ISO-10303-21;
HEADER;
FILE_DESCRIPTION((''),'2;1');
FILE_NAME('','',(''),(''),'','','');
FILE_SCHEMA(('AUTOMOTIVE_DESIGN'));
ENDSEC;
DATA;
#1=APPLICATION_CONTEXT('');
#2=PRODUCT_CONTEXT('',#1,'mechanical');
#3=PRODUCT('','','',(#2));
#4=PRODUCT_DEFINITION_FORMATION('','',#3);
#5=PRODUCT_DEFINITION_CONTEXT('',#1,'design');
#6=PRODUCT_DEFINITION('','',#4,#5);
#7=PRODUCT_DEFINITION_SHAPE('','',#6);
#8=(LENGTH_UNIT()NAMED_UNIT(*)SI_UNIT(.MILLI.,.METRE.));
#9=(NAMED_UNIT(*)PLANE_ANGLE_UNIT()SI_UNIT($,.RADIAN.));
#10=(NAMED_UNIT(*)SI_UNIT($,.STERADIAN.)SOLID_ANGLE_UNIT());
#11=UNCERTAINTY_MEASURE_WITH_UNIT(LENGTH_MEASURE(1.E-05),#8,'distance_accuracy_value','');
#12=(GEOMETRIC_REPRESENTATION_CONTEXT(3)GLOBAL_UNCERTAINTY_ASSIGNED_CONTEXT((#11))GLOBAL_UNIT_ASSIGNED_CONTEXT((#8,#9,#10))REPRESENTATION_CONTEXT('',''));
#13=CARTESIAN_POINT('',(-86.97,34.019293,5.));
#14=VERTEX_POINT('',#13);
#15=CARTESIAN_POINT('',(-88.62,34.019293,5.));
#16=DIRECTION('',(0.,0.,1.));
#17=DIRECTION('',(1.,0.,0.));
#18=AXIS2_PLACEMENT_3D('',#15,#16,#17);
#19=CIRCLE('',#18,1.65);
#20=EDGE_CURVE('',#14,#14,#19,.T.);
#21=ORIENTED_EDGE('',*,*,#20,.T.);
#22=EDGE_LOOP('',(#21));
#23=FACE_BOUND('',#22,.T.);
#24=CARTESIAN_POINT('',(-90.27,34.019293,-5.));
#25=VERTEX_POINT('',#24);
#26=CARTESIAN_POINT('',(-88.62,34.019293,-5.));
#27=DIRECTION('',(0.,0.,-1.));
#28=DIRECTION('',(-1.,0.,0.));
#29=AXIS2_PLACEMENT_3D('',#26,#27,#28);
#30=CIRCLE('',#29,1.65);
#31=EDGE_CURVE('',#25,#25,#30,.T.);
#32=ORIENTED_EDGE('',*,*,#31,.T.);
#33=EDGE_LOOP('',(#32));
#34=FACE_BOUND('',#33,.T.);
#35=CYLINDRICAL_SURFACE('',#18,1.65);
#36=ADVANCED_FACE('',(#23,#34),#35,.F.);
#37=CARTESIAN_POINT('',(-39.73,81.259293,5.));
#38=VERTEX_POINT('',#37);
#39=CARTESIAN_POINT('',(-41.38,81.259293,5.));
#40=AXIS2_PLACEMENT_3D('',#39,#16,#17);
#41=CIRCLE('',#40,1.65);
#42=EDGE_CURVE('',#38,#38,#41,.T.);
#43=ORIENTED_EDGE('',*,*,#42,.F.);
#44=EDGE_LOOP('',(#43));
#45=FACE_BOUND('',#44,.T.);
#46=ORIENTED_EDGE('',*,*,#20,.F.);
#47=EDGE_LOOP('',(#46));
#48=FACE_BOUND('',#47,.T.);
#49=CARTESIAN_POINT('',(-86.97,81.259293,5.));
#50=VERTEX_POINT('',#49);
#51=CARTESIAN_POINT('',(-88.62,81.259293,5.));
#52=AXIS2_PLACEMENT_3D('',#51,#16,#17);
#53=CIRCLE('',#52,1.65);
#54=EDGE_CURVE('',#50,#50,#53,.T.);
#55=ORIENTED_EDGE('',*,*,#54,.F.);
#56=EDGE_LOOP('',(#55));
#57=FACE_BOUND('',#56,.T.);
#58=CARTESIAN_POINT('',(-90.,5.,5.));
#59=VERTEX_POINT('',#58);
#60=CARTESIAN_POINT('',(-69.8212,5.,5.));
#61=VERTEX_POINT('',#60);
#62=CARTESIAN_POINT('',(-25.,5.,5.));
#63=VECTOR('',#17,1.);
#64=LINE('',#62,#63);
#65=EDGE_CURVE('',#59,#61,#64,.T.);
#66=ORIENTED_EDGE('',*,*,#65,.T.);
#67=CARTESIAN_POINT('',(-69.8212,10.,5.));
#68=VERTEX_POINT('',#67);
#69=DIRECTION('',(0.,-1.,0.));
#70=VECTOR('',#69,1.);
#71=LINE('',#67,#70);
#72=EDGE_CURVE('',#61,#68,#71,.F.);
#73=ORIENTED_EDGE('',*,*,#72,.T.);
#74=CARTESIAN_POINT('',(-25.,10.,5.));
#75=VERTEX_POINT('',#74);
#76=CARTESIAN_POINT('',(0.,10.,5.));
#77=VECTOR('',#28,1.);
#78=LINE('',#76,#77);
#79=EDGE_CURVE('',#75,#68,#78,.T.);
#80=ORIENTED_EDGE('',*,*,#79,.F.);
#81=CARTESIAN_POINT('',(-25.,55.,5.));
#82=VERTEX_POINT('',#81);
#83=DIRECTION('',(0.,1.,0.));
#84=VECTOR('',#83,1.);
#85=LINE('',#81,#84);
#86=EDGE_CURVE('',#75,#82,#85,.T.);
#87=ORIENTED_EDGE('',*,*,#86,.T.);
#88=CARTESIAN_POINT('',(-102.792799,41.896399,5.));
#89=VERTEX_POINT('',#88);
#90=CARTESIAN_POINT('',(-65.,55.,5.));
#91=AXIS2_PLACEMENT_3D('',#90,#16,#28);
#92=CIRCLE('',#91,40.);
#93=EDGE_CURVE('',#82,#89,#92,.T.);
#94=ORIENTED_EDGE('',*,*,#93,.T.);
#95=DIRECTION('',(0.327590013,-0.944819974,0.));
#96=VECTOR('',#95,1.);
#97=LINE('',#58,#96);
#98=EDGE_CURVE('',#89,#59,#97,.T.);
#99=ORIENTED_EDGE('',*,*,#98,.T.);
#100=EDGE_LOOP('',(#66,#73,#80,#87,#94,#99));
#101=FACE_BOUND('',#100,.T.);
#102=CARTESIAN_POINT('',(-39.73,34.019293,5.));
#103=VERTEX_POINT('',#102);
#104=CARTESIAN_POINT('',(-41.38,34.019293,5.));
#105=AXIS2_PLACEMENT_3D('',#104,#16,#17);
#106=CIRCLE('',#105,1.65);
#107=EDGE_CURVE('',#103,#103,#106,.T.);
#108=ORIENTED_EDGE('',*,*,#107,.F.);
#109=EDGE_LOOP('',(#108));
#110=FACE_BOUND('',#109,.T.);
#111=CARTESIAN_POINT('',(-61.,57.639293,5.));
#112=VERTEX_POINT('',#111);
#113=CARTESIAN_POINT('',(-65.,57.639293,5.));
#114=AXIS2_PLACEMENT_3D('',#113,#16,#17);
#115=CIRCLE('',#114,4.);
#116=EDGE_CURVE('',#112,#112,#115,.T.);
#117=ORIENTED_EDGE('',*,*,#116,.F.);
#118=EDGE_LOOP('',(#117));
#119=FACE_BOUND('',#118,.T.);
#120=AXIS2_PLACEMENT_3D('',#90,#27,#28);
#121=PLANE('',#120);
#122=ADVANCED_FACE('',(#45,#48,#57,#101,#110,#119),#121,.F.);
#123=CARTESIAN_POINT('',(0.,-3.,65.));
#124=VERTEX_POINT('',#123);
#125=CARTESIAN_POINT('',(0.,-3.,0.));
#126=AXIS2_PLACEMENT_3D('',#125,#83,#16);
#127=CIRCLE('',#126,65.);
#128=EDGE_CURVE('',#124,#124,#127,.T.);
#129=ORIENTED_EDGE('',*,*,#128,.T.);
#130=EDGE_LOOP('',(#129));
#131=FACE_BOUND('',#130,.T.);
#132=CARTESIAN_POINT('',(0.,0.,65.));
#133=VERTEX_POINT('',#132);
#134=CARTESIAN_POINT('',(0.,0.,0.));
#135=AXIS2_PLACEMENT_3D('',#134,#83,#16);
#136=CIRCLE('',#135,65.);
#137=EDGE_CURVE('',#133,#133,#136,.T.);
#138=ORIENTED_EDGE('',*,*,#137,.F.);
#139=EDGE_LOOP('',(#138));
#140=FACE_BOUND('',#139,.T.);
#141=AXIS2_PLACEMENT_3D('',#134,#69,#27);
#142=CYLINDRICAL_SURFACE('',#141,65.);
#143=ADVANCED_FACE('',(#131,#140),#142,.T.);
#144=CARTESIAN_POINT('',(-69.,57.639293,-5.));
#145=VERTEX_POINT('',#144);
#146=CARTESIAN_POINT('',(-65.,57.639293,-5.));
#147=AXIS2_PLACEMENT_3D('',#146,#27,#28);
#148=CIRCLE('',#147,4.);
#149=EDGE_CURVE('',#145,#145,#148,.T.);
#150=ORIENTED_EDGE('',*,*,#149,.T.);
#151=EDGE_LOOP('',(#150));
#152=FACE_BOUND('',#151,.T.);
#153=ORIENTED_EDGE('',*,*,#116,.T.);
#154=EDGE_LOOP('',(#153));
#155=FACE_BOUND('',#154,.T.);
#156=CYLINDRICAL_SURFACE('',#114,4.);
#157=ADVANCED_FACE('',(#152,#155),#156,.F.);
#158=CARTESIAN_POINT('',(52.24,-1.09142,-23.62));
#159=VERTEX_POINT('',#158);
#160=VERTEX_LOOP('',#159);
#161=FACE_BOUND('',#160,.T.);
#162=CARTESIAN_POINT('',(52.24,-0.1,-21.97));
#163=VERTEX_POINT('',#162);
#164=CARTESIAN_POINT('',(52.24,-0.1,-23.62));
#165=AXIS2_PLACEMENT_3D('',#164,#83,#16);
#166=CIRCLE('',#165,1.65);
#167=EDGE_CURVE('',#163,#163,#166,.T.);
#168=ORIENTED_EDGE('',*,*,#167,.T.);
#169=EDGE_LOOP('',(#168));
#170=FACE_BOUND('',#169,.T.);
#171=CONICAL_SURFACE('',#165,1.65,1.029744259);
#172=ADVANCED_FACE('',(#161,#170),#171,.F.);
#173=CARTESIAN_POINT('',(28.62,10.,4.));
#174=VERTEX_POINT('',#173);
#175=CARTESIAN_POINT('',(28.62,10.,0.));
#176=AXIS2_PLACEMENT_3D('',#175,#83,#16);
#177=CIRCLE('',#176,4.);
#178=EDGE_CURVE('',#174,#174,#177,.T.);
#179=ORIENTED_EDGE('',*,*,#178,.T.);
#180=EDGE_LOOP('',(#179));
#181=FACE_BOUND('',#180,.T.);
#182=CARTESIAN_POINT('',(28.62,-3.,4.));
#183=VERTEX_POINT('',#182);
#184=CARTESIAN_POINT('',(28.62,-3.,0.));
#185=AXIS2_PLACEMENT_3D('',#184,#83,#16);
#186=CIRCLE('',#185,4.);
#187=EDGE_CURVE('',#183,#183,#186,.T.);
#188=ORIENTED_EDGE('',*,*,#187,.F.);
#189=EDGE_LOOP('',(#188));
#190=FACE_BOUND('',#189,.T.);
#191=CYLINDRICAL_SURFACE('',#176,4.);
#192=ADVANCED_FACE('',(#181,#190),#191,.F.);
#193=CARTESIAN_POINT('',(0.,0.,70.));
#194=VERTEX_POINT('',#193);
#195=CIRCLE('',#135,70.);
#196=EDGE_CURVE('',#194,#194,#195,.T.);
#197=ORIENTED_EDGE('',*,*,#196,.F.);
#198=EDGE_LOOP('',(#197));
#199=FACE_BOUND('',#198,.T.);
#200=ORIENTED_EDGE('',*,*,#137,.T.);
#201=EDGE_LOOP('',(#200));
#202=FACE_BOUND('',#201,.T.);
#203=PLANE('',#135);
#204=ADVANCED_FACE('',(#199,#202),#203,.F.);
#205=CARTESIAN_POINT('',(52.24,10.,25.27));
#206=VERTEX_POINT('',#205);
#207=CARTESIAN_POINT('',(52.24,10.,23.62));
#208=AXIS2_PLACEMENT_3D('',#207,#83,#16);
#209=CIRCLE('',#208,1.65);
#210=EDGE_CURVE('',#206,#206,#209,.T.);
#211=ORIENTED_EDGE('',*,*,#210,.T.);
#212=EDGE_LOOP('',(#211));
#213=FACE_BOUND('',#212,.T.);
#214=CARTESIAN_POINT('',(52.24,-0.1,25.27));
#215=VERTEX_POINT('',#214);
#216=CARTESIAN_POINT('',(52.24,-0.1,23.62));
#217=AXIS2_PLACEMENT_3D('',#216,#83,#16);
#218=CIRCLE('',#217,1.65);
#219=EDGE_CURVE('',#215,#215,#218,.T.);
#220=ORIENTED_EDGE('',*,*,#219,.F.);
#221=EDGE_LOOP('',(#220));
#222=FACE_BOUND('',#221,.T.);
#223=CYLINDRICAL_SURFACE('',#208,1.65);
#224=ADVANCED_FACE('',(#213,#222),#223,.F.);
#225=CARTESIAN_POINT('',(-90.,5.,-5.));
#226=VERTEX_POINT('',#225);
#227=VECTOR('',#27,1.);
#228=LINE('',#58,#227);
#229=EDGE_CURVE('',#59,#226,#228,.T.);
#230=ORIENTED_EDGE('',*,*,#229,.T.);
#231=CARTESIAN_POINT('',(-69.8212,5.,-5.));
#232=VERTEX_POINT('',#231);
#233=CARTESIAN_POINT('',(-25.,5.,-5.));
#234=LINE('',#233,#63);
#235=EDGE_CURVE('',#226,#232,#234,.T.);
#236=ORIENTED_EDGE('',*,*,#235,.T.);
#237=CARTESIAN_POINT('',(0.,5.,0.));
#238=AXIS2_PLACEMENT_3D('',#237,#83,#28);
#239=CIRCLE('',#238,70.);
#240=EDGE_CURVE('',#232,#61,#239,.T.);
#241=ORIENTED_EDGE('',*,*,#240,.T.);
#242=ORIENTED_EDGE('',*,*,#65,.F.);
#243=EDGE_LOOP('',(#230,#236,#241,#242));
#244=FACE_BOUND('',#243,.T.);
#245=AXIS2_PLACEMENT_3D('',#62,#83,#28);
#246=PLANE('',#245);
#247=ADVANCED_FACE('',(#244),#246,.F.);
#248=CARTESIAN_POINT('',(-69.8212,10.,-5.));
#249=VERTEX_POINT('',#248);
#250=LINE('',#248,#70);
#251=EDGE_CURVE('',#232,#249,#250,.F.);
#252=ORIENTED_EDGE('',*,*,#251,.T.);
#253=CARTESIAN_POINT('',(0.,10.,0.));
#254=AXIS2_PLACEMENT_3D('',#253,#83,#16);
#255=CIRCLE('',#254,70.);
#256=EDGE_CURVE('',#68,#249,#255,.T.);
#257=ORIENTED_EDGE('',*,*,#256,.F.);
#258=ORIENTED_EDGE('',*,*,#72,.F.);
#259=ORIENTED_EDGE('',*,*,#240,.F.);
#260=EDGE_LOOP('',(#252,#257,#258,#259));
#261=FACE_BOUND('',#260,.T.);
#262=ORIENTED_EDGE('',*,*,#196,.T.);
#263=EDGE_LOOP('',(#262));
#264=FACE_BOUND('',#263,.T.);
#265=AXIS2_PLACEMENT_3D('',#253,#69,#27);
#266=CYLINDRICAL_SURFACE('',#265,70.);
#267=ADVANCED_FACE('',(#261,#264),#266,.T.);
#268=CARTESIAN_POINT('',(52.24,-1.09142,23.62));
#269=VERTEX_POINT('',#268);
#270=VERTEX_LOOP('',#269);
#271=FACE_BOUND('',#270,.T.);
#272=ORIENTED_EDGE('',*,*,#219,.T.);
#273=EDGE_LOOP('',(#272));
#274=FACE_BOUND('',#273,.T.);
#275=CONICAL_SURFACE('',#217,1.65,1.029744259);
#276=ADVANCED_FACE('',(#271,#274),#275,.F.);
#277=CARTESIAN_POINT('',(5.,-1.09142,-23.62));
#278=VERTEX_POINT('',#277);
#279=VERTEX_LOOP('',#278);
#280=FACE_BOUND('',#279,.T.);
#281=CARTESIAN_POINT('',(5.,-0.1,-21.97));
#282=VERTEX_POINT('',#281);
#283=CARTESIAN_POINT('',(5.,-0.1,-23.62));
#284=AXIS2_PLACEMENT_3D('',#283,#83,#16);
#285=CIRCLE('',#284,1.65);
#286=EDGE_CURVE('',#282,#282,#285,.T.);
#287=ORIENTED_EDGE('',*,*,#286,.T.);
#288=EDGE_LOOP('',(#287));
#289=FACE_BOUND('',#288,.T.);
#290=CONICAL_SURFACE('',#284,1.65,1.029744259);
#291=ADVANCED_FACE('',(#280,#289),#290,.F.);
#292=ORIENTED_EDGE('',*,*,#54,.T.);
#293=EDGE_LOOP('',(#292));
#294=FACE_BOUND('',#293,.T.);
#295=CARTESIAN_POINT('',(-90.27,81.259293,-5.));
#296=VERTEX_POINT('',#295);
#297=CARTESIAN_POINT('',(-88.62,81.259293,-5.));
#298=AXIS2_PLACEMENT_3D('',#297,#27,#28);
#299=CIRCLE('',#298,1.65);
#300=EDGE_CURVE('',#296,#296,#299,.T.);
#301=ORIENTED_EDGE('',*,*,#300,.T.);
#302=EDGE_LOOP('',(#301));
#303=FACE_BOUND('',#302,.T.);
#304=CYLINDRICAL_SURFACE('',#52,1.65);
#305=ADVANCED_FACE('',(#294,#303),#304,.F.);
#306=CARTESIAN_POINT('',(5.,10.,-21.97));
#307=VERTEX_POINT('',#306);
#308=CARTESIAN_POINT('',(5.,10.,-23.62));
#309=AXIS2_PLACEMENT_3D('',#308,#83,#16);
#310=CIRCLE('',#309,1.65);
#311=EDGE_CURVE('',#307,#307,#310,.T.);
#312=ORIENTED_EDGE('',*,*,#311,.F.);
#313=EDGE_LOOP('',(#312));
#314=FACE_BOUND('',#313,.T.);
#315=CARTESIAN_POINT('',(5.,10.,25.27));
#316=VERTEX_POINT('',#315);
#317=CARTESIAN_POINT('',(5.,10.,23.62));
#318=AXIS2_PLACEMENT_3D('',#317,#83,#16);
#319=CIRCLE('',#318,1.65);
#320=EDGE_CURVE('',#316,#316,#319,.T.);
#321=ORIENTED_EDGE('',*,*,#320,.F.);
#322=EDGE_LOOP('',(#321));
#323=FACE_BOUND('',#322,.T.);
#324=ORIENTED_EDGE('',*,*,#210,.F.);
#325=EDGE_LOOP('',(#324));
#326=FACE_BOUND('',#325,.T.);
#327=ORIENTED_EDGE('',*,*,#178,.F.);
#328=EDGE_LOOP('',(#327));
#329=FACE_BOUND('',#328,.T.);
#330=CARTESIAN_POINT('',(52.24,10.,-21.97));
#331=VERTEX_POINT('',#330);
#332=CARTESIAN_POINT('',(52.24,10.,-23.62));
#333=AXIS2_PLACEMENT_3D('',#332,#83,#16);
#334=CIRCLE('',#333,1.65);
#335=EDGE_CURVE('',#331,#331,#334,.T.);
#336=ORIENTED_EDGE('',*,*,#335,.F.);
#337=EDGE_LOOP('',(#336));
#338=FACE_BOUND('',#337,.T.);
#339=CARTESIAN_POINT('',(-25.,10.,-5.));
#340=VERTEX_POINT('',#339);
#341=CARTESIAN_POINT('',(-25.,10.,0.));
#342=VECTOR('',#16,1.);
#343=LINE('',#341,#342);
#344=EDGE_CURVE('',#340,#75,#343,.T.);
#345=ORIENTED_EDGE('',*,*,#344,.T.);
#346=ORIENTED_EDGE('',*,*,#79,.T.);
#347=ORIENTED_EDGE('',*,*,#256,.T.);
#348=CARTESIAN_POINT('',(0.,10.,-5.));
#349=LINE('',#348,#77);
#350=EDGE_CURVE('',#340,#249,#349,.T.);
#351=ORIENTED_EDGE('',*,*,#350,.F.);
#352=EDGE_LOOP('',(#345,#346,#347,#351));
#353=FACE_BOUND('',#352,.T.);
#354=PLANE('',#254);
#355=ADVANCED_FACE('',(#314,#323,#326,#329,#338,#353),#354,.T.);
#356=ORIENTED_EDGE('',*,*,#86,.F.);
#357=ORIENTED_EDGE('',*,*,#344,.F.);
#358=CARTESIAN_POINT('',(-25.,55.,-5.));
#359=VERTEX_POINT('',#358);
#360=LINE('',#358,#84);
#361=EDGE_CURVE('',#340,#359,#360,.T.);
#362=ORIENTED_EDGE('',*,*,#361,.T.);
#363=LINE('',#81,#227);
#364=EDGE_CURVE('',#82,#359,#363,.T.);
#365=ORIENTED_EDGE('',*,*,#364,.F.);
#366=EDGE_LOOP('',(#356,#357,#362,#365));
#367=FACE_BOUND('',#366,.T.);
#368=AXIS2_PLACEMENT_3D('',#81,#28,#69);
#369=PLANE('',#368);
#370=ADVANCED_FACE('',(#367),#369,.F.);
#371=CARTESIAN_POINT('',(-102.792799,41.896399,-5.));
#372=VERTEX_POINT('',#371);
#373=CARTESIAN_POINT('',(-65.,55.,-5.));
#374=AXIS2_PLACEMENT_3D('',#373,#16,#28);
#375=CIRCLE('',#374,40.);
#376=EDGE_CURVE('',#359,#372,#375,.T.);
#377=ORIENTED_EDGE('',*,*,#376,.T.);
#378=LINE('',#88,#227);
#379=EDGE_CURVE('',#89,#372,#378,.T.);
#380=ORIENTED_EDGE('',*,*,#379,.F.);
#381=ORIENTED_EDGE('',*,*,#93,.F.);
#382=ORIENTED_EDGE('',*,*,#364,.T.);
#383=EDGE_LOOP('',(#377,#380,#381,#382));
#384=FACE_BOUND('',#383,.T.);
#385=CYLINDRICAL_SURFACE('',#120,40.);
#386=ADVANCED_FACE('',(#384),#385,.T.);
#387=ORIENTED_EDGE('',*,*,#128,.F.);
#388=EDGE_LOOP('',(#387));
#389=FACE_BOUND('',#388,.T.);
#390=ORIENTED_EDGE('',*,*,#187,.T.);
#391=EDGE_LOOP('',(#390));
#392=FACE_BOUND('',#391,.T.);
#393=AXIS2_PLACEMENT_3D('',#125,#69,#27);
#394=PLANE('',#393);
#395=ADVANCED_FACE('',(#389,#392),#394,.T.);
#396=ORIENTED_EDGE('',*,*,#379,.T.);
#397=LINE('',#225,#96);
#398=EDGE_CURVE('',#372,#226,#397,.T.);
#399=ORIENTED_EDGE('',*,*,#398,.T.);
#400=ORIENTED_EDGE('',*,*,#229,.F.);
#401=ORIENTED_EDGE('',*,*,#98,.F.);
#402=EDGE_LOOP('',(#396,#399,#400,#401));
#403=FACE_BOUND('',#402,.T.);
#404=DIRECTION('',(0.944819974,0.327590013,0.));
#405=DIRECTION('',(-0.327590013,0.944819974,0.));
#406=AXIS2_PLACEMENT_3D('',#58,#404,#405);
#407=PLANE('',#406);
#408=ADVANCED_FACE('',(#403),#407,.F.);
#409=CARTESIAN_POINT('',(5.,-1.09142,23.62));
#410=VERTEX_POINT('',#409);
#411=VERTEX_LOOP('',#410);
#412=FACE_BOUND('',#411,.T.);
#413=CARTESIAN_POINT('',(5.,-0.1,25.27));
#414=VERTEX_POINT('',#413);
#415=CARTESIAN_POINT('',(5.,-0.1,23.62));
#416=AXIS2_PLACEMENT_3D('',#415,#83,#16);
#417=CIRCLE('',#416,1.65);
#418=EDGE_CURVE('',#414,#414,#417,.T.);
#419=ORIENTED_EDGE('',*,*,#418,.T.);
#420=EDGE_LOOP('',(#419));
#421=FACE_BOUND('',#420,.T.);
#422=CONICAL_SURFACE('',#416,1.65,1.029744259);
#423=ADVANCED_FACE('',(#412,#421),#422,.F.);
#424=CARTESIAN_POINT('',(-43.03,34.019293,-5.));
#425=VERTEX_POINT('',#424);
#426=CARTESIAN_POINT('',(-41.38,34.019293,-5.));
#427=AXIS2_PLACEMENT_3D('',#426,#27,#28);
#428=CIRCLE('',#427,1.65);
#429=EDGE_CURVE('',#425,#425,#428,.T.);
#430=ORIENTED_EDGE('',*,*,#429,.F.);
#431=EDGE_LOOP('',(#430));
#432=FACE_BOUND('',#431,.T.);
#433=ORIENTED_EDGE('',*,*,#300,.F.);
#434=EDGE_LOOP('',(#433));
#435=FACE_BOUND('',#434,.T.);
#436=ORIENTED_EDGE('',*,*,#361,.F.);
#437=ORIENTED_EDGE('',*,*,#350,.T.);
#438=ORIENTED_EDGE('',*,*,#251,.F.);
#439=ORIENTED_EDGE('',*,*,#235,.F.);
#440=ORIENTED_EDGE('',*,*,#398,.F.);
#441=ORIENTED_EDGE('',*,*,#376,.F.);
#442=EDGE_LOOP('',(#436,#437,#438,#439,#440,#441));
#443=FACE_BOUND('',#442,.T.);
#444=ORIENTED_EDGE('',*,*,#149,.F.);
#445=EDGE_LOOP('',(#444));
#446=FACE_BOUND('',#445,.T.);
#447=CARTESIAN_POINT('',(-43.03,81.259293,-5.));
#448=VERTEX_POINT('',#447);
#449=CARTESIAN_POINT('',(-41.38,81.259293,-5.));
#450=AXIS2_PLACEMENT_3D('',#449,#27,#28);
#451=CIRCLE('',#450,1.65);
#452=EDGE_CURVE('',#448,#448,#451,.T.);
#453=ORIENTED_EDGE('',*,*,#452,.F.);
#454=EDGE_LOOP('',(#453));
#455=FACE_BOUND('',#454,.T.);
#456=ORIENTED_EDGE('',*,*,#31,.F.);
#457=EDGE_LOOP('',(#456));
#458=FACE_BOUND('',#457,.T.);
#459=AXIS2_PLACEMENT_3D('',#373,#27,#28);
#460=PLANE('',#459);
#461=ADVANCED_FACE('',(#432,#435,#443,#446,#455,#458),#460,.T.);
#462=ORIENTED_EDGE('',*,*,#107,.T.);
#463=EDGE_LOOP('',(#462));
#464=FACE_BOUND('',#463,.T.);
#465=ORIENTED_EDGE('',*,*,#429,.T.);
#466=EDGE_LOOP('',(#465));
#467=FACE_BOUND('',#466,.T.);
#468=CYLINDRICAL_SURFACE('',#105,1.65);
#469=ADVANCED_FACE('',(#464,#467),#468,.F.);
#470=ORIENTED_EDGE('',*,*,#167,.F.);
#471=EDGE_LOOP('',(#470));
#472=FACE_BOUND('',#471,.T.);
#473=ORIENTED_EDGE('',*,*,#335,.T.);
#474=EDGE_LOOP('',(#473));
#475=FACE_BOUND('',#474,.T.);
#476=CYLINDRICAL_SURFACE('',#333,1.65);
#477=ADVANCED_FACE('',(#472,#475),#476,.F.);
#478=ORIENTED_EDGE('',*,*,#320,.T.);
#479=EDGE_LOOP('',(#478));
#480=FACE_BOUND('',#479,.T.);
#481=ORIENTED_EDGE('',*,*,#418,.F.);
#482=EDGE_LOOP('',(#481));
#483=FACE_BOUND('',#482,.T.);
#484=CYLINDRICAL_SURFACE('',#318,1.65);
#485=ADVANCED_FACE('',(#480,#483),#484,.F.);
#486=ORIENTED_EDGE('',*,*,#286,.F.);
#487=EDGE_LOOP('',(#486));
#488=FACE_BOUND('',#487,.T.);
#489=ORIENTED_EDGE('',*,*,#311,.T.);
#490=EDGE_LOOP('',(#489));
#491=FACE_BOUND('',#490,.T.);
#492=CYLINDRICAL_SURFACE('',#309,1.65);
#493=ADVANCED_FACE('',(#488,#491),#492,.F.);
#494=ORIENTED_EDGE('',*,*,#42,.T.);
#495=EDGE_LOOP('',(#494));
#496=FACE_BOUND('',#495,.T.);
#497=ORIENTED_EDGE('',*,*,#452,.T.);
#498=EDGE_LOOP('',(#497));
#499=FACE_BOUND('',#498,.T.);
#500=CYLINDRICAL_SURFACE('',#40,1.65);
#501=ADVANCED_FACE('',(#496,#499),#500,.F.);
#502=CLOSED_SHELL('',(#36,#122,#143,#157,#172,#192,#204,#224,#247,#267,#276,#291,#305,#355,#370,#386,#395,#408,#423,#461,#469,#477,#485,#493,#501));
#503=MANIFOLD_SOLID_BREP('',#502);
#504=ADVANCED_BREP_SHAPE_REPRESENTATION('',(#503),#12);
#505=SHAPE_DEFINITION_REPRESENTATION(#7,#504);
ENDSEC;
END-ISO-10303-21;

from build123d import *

# Parameters (mm, degrees)
SKETCH1_R                 = 70
BOSS_EXTRUDE1_DEPTH       = 10
BOSS_EXTRUDE2_START       = -3
BOSS_EXTRUDE2_OUTLINE_R   = 65
BOSS_EXTRUDE2_DEPTH       = 3
BOSS_EXTRUDE3_DEPTH       = 5
M4X0_7_TAPPED_HOLE1_D     = 3.3
M4X0_7_TAPPED_HOLE1_DEPTH = 10.1
M4X0_7_TAPPED_HOLE1_TIP   = 0.991420021
F_8_0MM_DOWEL_HOLE1_D     = 8
F_8_0MM_DOWEL_HOLE2_D     = 8
M4X0_7_TAPPED_HOLE2_D     = 3.3
M4X0_7_TAPPED_HOLE2_DEPTH = 10.1
M4X0_7_TAPPED_HOLE2_TIP   = 0.991420021


# Read off the part's stored shape, not the designer's step: Boss-Extrude2
with BuildPart() as part:
    # Sketch1 → Boss-Extrude1 (new body)
    with BuildSketch(Plane(origin=(0, 0, 0), x_dir=(1, 0, 0), z_dir=(0, 1, 0))):
        with Locations(Location((0, 0, 0), (0, 0, 270))):
            Circle(SKETCH1_R)
    extrude(amount=BOSS_EXTRUDE1_DEPTH)

    # Boss-Extrude2 outline → Boss-Extrude2 (add)
    with BuildSketch(Plane(origin=(0, 0, 0), x_dir=(1, 0, 0), z_dir=(0, 1, 0)).offset(BOSS_EXTRUDE2_START)):
        Circle(BOSS_EXTRUDE2_OUTLINE_R)
    extrude(amount=BOSS_EXTRUDE2_DEPTH)

    # Sketch3 → Boss-Extrude3 (add, symmetric)
    with BuildSketch(Plane.XY):
        with BuildLine():
            Line((-25, 55), (-25, 5))
            Line((-25, 5), (-90, 5))
            Line((-90, 5), (-102.792798963, 41.896399481))
            ThreePointArc((-102.792798963, 41.896399481), (-71.644096684, 94.444340269), (-25, 55))
        make_face()
    extrude(amount=BOSS_EXTRUDE3_DEPTH, both=True)

    # M4x0.7 Tapped Hole1
    with Locations(Plane(origin=(0, 10, 0), x_dir=(1, 0, 0), z_dir=(0, 1, 0))):
        with Locations((5, 23.62), (52.24, 23.62), (52.24, -23.62), (5, -23.62)):
            Hole(M4X0_7_TAPPED_HOLE1_D / 2, depth=M4X0_7_TAPPED_HOLE1_DEPTH)
            with Locations((0, 0, -(M4X0_7_TAPPED_HOLE1_DEPTH + M4X0_7_TAPPED_HOLE1_TIP / 2))):  # 118° drill point
                Cone(0, M4X0_7_TAPPED_HOLE1_D / 2, M4X0_7_TAPPED_HOLE1_TIP, mode=Mode.SUBTRACT)

    # Ø8.0mm Dowel Hole1 (through all)
    with Locations(Plane(origin=(0, 10, 0), x_dir=(1, 0, 0), z_dir=(0, 1, 0))):
        with Locations((28.62, 0)):
            Hole(F_8_0MM_DOWEL_HOLE1_D / 2)

    # Ø8.0mm Dowel Hole2 (through all)
    with Locations(Plane.XY.offset(5)):
        with Locations((-65, 57.639293091)):
            Hole(F_8_0MM_DOWEL_HOLE2_D / 2)

    # M4x0.7 Tapped Hole2
    with Locations(Plane(origin=(-106.523745818, 66.238796536, 5), x_dir=(1, 0, 0), z_dir=(0, 0, 1))):
        with Locations((17.903745818, 15.020496555), (65.143745818, 15.020496555), (65.143745818, -32.219503445), (17.903745818, -32.219503445)):
            Hole(M4X0_7_TAPPED_HOLE2_D / 2, depth=M4X0_7_TAPPED_HOLE2_DEPTH)
            with Locations((0, 0, -(M4X0_7_TAPPED_HOLE2_DEPTH + M4X0_7_TAPPED_HOLE2_TIP / 2))):  # 118° drill point
                Cone(0, M4X0_7_TAPPED_HOLE2_D / 2, M4X0_7_TAPPED_HOLE2_TIP, mode=Mode.SUBTRACT)


solid = part.part
